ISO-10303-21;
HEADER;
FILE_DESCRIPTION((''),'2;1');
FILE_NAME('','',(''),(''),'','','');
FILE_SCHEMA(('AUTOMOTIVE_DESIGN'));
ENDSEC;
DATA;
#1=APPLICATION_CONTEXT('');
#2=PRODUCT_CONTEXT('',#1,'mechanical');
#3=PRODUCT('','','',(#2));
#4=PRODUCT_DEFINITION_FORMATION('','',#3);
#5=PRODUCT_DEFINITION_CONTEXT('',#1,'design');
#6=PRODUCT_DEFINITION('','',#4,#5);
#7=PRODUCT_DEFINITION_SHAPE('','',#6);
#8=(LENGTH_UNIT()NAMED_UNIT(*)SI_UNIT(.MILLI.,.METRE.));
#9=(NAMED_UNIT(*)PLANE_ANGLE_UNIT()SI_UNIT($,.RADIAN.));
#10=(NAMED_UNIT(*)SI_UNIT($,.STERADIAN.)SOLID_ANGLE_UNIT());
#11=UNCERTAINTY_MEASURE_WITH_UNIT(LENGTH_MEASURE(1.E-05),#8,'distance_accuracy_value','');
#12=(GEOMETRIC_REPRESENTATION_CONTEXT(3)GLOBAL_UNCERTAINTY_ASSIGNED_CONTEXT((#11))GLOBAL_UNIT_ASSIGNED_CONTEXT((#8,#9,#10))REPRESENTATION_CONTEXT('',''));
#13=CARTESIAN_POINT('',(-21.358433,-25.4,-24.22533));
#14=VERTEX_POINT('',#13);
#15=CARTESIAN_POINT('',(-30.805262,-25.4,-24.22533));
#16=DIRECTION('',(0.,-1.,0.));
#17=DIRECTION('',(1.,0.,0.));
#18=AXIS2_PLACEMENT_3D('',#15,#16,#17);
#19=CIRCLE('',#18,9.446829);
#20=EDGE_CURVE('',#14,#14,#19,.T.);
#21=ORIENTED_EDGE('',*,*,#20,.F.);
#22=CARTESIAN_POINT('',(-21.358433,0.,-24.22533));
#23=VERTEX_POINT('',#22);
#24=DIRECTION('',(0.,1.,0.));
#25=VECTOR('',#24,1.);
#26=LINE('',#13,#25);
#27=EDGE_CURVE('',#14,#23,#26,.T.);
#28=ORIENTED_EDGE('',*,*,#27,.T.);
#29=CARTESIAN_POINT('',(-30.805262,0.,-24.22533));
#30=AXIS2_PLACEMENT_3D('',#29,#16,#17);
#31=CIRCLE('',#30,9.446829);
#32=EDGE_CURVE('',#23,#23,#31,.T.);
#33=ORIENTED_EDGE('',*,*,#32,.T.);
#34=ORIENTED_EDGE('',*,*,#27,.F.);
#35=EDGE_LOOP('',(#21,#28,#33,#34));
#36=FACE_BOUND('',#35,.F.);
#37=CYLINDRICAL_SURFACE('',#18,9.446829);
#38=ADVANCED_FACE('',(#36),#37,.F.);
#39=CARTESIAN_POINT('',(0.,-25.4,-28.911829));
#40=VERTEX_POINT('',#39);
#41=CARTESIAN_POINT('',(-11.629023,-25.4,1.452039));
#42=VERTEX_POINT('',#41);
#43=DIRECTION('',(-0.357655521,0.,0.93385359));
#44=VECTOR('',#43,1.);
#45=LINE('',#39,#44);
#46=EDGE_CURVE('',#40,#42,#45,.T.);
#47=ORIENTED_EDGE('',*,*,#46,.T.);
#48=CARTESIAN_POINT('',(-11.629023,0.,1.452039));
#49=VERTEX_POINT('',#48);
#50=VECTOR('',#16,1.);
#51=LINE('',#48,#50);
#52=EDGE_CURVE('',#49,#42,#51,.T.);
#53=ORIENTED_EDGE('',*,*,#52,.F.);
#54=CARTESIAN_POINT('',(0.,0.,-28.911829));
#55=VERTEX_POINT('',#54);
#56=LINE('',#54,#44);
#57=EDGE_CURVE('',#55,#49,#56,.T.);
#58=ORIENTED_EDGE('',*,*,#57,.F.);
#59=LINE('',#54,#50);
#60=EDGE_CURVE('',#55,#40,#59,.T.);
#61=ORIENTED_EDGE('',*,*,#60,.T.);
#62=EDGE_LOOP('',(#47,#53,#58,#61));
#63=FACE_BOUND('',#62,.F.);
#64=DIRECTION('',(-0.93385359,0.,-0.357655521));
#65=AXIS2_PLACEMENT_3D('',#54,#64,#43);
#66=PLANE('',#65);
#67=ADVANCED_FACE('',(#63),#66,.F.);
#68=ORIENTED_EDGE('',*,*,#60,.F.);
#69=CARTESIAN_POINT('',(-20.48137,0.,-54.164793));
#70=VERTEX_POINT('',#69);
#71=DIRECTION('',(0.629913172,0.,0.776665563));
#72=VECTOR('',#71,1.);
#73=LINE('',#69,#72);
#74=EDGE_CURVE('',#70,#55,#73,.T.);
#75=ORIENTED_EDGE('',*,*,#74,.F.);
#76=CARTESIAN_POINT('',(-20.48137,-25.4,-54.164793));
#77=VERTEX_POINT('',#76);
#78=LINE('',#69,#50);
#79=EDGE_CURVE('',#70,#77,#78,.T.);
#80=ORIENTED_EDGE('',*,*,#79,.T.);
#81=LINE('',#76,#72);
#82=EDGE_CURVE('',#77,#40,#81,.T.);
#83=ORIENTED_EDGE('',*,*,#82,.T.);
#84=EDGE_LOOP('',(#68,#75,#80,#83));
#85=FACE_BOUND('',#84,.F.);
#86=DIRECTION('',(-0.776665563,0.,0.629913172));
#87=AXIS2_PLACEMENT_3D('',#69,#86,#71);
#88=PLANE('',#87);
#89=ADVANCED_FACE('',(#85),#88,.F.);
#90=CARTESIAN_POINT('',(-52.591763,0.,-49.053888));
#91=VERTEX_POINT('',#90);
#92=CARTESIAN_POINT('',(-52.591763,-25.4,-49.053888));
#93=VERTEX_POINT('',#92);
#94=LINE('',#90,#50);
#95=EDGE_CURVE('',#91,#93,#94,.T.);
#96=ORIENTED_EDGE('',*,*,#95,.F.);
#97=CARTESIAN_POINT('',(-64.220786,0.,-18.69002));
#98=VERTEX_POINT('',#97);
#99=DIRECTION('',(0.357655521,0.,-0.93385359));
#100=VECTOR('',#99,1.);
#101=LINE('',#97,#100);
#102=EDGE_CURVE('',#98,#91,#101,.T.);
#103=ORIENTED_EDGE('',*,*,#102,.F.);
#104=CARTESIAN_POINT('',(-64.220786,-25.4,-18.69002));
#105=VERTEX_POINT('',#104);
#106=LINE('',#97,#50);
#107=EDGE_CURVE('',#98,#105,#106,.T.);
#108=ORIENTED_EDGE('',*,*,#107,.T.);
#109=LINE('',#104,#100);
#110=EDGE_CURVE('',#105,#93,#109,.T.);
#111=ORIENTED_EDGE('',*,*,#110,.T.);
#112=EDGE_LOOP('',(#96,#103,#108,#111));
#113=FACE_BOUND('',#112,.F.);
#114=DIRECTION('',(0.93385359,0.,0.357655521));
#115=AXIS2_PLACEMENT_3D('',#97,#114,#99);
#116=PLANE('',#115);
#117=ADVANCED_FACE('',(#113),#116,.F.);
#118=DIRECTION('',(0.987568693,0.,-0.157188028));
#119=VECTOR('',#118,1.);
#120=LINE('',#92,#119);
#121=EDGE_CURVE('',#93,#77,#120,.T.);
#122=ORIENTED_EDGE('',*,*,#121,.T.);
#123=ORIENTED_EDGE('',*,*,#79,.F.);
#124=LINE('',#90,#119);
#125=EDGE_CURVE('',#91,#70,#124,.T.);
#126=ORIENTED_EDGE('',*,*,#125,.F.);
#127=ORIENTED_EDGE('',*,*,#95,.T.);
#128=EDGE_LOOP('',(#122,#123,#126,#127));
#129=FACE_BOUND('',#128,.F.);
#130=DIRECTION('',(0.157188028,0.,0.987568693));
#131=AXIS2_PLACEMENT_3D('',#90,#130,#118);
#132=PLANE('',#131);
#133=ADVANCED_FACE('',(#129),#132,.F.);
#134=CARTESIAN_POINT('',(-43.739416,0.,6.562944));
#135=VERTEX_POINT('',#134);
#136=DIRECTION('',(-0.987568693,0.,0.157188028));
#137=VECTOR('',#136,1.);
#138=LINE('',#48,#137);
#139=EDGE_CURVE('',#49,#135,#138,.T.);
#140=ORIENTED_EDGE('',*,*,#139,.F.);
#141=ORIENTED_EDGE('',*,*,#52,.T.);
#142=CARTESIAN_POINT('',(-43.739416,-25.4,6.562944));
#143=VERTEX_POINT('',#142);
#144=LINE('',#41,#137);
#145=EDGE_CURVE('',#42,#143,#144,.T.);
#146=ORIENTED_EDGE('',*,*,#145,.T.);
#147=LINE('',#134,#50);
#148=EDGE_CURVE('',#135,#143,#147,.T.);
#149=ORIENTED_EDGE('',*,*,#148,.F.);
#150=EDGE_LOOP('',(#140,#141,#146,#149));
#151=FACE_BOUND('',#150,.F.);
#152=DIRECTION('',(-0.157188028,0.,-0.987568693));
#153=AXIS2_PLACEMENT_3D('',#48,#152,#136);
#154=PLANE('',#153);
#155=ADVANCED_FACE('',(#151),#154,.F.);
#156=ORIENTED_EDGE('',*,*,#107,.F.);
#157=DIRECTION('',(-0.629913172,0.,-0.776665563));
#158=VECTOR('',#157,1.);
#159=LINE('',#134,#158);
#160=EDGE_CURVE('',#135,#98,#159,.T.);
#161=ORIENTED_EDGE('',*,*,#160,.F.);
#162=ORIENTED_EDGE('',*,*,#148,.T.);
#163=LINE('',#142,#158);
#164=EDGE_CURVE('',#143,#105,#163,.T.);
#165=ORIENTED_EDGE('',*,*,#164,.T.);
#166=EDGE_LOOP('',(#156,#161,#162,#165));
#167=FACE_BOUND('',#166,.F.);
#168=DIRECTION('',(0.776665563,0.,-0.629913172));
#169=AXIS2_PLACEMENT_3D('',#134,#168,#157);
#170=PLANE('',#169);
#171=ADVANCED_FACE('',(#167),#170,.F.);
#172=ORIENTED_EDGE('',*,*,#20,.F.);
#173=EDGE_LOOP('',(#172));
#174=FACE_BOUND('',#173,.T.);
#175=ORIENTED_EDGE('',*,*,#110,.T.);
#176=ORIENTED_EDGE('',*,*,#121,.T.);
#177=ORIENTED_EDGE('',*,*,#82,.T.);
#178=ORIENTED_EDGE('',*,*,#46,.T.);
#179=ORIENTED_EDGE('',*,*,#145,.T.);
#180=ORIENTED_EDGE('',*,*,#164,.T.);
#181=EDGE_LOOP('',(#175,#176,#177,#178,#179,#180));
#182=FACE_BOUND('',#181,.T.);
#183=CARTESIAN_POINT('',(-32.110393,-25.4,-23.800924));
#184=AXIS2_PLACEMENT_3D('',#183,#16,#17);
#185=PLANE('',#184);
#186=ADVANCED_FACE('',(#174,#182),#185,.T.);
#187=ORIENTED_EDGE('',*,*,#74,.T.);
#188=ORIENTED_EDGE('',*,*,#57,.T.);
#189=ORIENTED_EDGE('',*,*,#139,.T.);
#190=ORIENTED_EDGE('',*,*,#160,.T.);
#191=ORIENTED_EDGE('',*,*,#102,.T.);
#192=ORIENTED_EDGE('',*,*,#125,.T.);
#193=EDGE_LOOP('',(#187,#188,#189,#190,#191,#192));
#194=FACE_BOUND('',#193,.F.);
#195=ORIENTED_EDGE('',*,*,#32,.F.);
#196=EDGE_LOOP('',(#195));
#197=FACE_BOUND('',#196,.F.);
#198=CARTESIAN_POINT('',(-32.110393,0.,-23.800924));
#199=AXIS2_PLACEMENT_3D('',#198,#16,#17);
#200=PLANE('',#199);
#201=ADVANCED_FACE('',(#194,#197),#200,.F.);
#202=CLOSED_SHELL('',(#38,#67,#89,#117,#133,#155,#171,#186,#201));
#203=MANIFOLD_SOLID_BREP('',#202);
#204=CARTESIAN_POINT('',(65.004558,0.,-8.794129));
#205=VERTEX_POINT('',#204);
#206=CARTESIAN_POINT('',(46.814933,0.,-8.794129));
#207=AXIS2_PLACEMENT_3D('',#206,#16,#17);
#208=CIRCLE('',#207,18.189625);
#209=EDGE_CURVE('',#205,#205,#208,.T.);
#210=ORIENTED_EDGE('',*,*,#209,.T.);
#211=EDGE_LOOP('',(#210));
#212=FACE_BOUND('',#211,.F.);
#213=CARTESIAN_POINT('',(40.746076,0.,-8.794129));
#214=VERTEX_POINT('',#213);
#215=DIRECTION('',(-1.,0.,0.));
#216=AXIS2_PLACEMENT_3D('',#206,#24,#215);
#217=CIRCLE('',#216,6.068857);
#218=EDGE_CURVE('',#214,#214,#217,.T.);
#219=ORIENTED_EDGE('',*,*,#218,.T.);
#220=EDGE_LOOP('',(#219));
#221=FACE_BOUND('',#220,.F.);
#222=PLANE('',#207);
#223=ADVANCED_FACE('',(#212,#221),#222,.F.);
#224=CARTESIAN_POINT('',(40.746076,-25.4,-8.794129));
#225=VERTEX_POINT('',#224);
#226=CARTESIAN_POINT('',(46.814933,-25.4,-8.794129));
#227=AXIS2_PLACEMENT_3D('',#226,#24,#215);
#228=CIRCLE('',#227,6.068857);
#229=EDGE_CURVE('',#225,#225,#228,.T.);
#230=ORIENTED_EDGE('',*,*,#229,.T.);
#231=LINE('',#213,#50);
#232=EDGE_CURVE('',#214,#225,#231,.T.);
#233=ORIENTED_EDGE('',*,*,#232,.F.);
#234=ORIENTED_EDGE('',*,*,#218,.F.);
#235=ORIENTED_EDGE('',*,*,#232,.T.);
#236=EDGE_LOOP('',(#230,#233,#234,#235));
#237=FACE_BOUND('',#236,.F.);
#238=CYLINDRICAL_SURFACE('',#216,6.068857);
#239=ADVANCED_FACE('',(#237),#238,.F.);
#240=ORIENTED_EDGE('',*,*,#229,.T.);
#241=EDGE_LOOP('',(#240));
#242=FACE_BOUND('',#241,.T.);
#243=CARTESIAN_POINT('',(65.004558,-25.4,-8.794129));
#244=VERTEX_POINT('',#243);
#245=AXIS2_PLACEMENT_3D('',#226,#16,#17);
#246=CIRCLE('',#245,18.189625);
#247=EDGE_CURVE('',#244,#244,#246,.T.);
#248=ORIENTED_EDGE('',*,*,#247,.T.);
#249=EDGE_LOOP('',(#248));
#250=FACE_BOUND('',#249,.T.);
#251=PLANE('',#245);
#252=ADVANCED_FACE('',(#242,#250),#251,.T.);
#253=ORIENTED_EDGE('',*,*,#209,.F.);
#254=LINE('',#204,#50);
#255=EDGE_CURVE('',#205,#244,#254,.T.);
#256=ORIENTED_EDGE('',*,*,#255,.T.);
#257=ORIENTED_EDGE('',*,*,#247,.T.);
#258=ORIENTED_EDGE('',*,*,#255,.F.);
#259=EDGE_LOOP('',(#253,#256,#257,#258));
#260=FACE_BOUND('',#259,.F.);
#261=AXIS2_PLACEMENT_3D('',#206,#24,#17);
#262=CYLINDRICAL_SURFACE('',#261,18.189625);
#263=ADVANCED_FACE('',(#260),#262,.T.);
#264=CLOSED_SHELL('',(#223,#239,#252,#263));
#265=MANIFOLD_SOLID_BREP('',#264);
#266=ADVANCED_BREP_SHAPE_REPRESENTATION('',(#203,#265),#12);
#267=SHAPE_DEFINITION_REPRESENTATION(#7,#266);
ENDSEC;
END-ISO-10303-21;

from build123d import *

# Parameters (mm, degrees)
F1_R      = 18.1896249191
F5_DEPTH  = 25.4
F6_R      = 6.0688570955
F7_DEPTH  = 27.2348383442
F9_DEPTH  = 25.4
F10_R     = 9.4468290058
F11_DEPTH = 25.4


# Not quite as in the source:
# - a feature of the source that left no trace in its solid (it failed there, or was rolled back) is left out


with BuildPart() as f5:
    # F1 (on Front) → F5 (new body)
    with BuildSketch(Plane.XZ):
        with Locations((46.8149334192, -8.7941288948)):
            Circle(F1_R)
    extrude(amount=F5_DEPTH)

    # F6 (on face) → F7 (cut)
    with BuildSketch(Plane(origin=(0, 0, 0), x_dir=(-1, 0, 0), z_dir=(0, 1, 0))):
        with Locations((-46.8149334192, -8.7941288948)):
            Circle(F6_R)
    extrude(amount=-F7_DEPTH, mode=Mode.SUBTRACT)


with BuildPart() as f9:
    # F8 (on Front) → F9 (new body)
    with BuildSketch(Plane.XZ):
        Polygon((-20.4813697214, -54.164792812), (0, -28.9118289948), (-11.6290233259, 1.4520393969), (-43.7394163733, 6.5629439713), (-64.2207860947, -18.690019846), (-52.5917627687, -49.0538882377), align=None)
    extrude(amount=F9_DEPTH)

    # F10 (on face) → F11 (cut)
    with BuildSketch(Plane.XZ.offset(25.4)):
        with Locations((-30.8052618057, -24.2253299803)):
            Circle(F10_R)
    extrude(amount=-F11_DEPTH, mode=Mode.SUBTRACT)


solid = Compound([f5.part, f9.part])
